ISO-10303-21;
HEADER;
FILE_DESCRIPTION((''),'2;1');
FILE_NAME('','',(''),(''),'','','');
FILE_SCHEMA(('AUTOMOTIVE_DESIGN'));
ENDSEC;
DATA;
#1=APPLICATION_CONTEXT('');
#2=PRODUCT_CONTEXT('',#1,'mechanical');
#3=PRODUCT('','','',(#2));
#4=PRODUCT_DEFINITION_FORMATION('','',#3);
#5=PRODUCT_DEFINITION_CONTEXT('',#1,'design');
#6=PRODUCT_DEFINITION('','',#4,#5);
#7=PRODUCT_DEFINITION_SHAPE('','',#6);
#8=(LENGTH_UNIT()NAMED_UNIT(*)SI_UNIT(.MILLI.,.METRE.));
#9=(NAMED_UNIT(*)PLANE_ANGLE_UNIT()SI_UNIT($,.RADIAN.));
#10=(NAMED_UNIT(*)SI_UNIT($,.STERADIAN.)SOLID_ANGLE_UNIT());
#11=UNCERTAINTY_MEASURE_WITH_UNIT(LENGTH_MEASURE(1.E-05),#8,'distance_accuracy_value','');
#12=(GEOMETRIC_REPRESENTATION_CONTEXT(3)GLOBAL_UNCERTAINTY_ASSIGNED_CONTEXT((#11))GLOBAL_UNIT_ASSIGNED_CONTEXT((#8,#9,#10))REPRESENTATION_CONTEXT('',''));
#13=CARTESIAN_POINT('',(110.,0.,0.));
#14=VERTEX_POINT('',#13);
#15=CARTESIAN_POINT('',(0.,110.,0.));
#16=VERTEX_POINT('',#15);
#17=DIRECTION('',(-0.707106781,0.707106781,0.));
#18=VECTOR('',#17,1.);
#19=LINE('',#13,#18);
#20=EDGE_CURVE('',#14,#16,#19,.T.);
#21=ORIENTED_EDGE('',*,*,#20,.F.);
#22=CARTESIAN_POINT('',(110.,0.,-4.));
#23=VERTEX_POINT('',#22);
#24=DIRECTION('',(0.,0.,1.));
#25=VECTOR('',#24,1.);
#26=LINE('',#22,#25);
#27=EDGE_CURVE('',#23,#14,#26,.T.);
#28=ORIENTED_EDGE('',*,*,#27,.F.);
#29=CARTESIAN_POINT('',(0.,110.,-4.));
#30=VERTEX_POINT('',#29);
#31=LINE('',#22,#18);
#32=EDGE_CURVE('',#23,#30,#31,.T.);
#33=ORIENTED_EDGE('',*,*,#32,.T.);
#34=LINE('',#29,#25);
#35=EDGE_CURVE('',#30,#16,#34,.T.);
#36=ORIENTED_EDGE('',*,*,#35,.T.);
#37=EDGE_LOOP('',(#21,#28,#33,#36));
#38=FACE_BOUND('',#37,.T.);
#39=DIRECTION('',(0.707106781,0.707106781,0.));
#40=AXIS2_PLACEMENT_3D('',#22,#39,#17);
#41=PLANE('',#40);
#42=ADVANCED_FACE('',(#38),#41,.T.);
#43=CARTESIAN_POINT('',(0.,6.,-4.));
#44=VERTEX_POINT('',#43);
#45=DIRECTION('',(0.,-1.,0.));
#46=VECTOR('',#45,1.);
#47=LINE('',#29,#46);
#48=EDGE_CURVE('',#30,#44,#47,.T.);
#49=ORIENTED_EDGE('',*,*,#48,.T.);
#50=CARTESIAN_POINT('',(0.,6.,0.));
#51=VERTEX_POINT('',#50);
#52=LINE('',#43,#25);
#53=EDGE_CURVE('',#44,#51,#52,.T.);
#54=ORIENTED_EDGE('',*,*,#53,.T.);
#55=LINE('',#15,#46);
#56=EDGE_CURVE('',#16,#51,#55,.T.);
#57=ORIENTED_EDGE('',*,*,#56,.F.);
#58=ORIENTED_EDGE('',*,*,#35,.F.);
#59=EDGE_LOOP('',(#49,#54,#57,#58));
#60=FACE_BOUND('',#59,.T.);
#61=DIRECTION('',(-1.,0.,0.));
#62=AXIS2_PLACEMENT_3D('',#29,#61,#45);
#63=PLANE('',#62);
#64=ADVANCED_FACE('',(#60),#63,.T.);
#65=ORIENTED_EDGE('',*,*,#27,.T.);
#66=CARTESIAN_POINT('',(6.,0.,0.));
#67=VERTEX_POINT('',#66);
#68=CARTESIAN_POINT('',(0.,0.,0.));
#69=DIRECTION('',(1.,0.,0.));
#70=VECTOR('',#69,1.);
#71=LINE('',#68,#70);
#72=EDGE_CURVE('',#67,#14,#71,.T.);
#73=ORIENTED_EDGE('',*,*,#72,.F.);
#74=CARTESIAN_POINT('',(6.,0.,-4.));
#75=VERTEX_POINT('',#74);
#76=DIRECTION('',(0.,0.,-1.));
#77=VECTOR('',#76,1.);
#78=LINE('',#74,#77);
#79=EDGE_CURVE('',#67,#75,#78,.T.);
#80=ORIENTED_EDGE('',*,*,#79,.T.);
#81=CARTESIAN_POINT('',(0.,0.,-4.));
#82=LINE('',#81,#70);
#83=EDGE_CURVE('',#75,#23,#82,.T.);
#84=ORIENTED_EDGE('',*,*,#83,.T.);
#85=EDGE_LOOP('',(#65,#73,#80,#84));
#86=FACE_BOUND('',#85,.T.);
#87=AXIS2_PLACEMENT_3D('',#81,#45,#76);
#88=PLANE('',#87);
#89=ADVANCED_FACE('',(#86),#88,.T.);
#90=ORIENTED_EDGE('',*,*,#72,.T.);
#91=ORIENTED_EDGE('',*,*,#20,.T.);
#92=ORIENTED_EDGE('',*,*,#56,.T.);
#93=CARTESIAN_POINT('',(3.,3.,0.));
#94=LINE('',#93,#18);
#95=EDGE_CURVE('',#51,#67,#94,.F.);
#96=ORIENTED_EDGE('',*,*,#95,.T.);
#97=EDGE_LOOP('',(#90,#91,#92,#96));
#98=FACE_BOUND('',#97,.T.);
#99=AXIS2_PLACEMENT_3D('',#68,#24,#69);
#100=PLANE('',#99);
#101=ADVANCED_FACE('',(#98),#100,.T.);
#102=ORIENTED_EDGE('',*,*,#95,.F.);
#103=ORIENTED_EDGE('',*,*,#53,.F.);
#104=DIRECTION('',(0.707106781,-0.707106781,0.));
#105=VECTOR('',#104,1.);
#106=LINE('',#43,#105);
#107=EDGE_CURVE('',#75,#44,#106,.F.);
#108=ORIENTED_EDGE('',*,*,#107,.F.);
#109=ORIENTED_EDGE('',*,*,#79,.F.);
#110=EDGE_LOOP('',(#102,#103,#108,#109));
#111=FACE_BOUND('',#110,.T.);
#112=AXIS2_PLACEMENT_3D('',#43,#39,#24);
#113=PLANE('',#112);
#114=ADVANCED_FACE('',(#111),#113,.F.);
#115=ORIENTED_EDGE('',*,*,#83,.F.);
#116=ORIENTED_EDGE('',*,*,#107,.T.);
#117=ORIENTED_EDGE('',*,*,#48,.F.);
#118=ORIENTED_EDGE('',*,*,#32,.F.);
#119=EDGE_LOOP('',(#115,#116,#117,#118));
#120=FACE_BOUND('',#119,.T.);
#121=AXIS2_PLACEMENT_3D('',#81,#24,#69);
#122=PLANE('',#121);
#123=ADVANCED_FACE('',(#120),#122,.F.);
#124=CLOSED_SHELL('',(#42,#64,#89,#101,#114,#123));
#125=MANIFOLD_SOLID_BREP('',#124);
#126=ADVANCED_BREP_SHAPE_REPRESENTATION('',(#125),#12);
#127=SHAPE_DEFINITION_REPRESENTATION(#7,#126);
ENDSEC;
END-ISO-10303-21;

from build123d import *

# Parameters (mm, degrees)
SM_BASE_FLANGE_1_DEPTH = 4
CHAMFER_1_SIZE         = 6


# Sheet-metal steps are written as plain solids
with BuildPart() as part:
    # Sketch 1 → Базовая кромка1 (new body)
    with BuildSketch(Plane.XY):
        Polygon((0, 110), (0, 0), (110, 0), align=None)
    extrude(amount=-SM_BASE_FLANGE_1_DEPTH)

    # Фаска1
    chamfer_1_edges = [part.edges().sort_by_distance(p)[0] for p in [
        (0, 0, -2),
    ]]
    chamfer(chamfer_1_edges, length=CHAMFER_1_SIZE)


solid = part.part
